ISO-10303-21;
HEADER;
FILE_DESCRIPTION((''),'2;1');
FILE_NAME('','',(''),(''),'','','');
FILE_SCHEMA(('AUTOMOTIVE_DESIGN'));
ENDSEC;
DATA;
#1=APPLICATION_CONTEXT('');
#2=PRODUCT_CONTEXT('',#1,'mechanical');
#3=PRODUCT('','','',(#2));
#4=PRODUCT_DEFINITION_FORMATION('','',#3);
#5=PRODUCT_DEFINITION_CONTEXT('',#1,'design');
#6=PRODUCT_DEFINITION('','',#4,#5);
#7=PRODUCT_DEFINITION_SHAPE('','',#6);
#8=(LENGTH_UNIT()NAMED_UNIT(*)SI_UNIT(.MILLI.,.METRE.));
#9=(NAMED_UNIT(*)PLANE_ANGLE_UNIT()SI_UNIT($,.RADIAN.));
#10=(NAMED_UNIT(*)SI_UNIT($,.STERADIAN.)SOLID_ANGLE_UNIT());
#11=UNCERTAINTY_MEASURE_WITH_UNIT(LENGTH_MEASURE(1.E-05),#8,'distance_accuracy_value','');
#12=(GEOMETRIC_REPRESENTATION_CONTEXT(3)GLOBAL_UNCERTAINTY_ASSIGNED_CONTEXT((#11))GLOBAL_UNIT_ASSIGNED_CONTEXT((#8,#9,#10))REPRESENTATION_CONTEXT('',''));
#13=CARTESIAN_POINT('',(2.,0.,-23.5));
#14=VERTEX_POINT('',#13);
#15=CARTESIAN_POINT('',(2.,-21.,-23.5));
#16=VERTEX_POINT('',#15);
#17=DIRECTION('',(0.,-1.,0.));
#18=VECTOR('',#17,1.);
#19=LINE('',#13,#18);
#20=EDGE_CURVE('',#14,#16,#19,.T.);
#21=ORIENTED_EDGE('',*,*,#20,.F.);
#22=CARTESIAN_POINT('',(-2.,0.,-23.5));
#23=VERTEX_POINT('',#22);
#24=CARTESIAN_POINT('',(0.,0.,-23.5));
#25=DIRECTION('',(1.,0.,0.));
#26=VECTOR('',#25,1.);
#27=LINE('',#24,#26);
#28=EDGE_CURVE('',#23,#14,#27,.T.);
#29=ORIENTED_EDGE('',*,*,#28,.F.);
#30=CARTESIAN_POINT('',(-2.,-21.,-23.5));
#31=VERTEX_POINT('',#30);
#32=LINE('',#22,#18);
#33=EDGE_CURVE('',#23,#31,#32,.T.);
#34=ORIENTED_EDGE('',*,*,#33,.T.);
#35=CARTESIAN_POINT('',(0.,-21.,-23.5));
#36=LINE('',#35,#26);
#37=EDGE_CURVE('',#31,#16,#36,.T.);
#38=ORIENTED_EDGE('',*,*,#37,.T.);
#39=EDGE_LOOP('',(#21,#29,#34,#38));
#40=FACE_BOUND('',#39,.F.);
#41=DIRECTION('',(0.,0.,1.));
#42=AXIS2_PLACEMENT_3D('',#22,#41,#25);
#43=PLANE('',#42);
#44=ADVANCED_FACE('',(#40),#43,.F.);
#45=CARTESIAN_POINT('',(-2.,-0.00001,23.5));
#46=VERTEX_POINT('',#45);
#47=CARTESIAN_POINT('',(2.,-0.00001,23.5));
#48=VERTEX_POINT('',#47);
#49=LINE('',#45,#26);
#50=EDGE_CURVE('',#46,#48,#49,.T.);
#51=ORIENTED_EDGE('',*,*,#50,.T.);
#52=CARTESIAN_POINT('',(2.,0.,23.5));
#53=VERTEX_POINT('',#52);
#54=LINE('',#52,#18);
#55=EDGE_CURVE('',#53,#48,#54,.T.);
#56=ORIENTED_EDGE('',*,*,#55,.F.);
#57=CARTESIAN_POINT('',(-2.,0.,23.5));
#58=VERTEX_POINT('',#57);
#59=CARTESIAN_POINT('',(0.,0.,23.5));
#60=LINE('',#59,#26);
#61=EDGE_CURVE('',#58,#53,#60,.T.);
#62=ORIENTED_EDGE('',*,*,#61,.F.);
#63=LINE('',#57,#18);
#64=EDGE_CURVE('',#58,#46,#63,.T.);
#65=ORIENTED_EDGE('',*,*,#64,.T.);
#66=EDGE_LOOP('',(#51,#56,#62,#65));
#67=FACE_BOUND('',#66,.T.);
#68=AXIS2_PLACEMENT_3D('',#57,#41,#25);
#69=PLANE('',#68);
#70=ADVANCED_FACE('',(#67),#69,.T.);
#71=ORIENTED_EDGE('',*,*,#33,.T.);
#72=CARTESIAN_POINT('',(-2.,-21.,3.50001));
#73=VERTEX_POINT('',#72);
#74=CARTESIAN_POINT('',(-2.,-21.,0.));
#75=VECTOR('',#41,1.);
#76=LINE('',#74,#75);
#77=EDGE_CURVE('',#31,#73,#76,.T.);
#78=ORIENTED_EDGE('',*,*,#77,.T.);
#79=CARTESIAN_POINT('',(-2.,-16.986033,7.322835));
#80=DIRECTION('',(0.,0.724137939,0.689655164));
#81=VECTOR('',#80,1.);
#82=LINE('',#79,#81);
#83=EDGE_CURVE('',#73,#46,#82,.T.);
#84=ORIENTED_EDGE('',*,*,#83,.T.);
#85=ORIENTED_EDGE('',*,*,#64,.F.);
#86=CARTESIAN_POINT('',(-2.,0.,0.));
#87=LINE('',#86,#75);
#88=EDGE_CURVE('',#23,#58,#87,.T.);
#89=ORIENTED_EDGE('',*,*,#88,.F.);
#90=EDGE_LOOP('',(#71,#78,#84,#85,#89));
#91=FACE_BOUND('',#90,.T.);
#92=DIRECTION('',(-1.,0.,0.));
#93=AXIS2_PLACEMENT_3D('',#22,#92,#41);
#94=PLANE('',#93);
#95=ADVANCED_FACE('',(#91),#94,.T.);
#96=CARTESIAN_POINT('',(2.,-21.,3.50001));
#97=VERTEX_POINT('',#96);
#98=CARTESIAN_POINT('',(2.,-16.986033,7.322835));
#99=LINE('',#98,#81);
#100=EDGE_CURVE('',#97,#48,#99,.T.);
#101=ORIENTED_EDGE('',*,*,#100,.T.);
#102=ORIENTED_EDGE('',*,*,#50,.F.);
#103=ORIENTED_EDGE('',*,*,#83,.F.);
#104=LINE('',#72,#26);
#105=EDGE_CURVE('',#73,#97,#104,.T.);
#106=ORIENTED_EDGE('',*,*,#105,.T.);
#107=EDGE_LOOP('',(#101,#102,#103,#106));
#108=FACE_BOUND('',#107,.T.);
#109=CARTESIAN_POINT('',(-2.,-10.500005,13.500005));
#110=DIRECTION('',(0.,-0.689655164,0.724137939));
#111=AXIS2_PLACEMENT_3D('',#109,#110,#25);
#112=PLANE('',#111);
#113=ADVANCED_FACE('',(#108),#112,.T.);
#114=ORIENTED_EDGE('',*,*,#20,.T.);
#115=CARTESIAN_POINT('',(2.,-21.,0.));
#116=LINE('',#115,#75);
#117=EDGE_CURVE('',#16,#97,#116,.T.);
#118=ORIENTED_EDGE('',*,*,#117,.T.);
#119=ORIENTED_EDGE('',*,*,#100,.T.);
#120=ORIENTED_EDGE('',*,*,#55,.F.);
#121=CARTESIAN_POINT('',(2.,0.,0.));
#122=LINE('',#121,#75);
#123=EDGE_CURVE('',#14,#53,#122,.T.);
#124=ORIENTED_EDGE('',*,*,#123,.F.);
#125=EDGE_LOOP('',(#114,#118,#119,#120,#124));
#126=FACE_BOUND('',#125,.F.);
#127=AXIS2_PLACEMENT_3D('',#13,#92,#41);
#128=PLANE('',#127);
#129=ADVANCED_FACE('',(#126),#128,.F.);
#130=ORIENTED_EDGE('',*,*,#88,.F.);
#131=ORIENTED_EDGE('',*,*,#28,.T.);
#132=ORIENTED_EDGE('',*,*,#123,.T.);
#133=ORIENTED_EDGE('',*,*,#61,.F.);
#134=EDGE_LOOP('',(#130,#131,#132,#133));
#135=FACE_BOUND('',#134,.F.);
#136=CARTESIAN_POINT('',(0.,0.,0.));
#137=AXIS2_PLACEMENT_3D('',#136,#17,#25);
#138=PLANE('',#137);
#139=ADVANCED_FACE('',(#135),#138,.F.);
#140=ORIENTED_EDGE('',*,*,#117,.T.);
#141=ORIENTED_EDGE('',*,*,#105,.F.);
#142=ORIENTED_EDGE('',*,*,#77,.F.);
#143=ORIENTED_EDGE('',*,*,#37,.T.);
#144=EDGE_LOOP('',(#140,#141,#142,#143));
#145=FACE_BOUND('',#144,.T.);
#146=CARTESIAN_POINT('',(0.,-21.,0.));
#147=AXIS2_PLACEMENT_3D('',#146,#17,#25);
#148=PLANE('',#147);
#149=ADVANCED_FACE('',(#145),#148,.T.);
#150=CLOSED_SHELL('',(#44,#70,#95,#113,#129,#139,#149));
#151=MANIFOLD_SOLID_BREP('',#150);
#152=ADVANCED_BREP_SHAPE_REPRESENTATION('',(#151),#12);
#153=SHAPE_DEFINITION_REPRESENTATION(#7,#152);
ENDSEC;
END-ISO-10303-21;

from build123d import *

# Parameters (mm, degrees)
F0_W     = 4
F0_H     = 47
F1_DEPTH = 21
F2_SIZE2 = 20.99999
F2_SIZE  = 19.99999


# Not quite as in the source:
# - a fillet or chamfer is up to 0.001 mm smaller than in the source, because OpenCascade refuses the exact size


with BuildPart() as f1:
    # F0 (on Front) → F1 (new body)
    with BuildSketch(Plane.XZ):
        Rectangle(F0_W, F0_H)
    extrude(amount=F1_DEPTH)

    # F2 (size 20 and 21 in the source; OpenCascade refuses exactly that, so slightly less here)
    f2_edges = [f1.edges().sort_by_distance(p)[0] for p in [
        (0, -21, 23.5),
    ]]
    f2_side = f1.faces().sort_by_distance((0, -21, 0))[0]
    chamfer(f2_edges, length=F2_SIZE, length2=F2_SIZE2, reference=f2_side)


solid = f1.part
